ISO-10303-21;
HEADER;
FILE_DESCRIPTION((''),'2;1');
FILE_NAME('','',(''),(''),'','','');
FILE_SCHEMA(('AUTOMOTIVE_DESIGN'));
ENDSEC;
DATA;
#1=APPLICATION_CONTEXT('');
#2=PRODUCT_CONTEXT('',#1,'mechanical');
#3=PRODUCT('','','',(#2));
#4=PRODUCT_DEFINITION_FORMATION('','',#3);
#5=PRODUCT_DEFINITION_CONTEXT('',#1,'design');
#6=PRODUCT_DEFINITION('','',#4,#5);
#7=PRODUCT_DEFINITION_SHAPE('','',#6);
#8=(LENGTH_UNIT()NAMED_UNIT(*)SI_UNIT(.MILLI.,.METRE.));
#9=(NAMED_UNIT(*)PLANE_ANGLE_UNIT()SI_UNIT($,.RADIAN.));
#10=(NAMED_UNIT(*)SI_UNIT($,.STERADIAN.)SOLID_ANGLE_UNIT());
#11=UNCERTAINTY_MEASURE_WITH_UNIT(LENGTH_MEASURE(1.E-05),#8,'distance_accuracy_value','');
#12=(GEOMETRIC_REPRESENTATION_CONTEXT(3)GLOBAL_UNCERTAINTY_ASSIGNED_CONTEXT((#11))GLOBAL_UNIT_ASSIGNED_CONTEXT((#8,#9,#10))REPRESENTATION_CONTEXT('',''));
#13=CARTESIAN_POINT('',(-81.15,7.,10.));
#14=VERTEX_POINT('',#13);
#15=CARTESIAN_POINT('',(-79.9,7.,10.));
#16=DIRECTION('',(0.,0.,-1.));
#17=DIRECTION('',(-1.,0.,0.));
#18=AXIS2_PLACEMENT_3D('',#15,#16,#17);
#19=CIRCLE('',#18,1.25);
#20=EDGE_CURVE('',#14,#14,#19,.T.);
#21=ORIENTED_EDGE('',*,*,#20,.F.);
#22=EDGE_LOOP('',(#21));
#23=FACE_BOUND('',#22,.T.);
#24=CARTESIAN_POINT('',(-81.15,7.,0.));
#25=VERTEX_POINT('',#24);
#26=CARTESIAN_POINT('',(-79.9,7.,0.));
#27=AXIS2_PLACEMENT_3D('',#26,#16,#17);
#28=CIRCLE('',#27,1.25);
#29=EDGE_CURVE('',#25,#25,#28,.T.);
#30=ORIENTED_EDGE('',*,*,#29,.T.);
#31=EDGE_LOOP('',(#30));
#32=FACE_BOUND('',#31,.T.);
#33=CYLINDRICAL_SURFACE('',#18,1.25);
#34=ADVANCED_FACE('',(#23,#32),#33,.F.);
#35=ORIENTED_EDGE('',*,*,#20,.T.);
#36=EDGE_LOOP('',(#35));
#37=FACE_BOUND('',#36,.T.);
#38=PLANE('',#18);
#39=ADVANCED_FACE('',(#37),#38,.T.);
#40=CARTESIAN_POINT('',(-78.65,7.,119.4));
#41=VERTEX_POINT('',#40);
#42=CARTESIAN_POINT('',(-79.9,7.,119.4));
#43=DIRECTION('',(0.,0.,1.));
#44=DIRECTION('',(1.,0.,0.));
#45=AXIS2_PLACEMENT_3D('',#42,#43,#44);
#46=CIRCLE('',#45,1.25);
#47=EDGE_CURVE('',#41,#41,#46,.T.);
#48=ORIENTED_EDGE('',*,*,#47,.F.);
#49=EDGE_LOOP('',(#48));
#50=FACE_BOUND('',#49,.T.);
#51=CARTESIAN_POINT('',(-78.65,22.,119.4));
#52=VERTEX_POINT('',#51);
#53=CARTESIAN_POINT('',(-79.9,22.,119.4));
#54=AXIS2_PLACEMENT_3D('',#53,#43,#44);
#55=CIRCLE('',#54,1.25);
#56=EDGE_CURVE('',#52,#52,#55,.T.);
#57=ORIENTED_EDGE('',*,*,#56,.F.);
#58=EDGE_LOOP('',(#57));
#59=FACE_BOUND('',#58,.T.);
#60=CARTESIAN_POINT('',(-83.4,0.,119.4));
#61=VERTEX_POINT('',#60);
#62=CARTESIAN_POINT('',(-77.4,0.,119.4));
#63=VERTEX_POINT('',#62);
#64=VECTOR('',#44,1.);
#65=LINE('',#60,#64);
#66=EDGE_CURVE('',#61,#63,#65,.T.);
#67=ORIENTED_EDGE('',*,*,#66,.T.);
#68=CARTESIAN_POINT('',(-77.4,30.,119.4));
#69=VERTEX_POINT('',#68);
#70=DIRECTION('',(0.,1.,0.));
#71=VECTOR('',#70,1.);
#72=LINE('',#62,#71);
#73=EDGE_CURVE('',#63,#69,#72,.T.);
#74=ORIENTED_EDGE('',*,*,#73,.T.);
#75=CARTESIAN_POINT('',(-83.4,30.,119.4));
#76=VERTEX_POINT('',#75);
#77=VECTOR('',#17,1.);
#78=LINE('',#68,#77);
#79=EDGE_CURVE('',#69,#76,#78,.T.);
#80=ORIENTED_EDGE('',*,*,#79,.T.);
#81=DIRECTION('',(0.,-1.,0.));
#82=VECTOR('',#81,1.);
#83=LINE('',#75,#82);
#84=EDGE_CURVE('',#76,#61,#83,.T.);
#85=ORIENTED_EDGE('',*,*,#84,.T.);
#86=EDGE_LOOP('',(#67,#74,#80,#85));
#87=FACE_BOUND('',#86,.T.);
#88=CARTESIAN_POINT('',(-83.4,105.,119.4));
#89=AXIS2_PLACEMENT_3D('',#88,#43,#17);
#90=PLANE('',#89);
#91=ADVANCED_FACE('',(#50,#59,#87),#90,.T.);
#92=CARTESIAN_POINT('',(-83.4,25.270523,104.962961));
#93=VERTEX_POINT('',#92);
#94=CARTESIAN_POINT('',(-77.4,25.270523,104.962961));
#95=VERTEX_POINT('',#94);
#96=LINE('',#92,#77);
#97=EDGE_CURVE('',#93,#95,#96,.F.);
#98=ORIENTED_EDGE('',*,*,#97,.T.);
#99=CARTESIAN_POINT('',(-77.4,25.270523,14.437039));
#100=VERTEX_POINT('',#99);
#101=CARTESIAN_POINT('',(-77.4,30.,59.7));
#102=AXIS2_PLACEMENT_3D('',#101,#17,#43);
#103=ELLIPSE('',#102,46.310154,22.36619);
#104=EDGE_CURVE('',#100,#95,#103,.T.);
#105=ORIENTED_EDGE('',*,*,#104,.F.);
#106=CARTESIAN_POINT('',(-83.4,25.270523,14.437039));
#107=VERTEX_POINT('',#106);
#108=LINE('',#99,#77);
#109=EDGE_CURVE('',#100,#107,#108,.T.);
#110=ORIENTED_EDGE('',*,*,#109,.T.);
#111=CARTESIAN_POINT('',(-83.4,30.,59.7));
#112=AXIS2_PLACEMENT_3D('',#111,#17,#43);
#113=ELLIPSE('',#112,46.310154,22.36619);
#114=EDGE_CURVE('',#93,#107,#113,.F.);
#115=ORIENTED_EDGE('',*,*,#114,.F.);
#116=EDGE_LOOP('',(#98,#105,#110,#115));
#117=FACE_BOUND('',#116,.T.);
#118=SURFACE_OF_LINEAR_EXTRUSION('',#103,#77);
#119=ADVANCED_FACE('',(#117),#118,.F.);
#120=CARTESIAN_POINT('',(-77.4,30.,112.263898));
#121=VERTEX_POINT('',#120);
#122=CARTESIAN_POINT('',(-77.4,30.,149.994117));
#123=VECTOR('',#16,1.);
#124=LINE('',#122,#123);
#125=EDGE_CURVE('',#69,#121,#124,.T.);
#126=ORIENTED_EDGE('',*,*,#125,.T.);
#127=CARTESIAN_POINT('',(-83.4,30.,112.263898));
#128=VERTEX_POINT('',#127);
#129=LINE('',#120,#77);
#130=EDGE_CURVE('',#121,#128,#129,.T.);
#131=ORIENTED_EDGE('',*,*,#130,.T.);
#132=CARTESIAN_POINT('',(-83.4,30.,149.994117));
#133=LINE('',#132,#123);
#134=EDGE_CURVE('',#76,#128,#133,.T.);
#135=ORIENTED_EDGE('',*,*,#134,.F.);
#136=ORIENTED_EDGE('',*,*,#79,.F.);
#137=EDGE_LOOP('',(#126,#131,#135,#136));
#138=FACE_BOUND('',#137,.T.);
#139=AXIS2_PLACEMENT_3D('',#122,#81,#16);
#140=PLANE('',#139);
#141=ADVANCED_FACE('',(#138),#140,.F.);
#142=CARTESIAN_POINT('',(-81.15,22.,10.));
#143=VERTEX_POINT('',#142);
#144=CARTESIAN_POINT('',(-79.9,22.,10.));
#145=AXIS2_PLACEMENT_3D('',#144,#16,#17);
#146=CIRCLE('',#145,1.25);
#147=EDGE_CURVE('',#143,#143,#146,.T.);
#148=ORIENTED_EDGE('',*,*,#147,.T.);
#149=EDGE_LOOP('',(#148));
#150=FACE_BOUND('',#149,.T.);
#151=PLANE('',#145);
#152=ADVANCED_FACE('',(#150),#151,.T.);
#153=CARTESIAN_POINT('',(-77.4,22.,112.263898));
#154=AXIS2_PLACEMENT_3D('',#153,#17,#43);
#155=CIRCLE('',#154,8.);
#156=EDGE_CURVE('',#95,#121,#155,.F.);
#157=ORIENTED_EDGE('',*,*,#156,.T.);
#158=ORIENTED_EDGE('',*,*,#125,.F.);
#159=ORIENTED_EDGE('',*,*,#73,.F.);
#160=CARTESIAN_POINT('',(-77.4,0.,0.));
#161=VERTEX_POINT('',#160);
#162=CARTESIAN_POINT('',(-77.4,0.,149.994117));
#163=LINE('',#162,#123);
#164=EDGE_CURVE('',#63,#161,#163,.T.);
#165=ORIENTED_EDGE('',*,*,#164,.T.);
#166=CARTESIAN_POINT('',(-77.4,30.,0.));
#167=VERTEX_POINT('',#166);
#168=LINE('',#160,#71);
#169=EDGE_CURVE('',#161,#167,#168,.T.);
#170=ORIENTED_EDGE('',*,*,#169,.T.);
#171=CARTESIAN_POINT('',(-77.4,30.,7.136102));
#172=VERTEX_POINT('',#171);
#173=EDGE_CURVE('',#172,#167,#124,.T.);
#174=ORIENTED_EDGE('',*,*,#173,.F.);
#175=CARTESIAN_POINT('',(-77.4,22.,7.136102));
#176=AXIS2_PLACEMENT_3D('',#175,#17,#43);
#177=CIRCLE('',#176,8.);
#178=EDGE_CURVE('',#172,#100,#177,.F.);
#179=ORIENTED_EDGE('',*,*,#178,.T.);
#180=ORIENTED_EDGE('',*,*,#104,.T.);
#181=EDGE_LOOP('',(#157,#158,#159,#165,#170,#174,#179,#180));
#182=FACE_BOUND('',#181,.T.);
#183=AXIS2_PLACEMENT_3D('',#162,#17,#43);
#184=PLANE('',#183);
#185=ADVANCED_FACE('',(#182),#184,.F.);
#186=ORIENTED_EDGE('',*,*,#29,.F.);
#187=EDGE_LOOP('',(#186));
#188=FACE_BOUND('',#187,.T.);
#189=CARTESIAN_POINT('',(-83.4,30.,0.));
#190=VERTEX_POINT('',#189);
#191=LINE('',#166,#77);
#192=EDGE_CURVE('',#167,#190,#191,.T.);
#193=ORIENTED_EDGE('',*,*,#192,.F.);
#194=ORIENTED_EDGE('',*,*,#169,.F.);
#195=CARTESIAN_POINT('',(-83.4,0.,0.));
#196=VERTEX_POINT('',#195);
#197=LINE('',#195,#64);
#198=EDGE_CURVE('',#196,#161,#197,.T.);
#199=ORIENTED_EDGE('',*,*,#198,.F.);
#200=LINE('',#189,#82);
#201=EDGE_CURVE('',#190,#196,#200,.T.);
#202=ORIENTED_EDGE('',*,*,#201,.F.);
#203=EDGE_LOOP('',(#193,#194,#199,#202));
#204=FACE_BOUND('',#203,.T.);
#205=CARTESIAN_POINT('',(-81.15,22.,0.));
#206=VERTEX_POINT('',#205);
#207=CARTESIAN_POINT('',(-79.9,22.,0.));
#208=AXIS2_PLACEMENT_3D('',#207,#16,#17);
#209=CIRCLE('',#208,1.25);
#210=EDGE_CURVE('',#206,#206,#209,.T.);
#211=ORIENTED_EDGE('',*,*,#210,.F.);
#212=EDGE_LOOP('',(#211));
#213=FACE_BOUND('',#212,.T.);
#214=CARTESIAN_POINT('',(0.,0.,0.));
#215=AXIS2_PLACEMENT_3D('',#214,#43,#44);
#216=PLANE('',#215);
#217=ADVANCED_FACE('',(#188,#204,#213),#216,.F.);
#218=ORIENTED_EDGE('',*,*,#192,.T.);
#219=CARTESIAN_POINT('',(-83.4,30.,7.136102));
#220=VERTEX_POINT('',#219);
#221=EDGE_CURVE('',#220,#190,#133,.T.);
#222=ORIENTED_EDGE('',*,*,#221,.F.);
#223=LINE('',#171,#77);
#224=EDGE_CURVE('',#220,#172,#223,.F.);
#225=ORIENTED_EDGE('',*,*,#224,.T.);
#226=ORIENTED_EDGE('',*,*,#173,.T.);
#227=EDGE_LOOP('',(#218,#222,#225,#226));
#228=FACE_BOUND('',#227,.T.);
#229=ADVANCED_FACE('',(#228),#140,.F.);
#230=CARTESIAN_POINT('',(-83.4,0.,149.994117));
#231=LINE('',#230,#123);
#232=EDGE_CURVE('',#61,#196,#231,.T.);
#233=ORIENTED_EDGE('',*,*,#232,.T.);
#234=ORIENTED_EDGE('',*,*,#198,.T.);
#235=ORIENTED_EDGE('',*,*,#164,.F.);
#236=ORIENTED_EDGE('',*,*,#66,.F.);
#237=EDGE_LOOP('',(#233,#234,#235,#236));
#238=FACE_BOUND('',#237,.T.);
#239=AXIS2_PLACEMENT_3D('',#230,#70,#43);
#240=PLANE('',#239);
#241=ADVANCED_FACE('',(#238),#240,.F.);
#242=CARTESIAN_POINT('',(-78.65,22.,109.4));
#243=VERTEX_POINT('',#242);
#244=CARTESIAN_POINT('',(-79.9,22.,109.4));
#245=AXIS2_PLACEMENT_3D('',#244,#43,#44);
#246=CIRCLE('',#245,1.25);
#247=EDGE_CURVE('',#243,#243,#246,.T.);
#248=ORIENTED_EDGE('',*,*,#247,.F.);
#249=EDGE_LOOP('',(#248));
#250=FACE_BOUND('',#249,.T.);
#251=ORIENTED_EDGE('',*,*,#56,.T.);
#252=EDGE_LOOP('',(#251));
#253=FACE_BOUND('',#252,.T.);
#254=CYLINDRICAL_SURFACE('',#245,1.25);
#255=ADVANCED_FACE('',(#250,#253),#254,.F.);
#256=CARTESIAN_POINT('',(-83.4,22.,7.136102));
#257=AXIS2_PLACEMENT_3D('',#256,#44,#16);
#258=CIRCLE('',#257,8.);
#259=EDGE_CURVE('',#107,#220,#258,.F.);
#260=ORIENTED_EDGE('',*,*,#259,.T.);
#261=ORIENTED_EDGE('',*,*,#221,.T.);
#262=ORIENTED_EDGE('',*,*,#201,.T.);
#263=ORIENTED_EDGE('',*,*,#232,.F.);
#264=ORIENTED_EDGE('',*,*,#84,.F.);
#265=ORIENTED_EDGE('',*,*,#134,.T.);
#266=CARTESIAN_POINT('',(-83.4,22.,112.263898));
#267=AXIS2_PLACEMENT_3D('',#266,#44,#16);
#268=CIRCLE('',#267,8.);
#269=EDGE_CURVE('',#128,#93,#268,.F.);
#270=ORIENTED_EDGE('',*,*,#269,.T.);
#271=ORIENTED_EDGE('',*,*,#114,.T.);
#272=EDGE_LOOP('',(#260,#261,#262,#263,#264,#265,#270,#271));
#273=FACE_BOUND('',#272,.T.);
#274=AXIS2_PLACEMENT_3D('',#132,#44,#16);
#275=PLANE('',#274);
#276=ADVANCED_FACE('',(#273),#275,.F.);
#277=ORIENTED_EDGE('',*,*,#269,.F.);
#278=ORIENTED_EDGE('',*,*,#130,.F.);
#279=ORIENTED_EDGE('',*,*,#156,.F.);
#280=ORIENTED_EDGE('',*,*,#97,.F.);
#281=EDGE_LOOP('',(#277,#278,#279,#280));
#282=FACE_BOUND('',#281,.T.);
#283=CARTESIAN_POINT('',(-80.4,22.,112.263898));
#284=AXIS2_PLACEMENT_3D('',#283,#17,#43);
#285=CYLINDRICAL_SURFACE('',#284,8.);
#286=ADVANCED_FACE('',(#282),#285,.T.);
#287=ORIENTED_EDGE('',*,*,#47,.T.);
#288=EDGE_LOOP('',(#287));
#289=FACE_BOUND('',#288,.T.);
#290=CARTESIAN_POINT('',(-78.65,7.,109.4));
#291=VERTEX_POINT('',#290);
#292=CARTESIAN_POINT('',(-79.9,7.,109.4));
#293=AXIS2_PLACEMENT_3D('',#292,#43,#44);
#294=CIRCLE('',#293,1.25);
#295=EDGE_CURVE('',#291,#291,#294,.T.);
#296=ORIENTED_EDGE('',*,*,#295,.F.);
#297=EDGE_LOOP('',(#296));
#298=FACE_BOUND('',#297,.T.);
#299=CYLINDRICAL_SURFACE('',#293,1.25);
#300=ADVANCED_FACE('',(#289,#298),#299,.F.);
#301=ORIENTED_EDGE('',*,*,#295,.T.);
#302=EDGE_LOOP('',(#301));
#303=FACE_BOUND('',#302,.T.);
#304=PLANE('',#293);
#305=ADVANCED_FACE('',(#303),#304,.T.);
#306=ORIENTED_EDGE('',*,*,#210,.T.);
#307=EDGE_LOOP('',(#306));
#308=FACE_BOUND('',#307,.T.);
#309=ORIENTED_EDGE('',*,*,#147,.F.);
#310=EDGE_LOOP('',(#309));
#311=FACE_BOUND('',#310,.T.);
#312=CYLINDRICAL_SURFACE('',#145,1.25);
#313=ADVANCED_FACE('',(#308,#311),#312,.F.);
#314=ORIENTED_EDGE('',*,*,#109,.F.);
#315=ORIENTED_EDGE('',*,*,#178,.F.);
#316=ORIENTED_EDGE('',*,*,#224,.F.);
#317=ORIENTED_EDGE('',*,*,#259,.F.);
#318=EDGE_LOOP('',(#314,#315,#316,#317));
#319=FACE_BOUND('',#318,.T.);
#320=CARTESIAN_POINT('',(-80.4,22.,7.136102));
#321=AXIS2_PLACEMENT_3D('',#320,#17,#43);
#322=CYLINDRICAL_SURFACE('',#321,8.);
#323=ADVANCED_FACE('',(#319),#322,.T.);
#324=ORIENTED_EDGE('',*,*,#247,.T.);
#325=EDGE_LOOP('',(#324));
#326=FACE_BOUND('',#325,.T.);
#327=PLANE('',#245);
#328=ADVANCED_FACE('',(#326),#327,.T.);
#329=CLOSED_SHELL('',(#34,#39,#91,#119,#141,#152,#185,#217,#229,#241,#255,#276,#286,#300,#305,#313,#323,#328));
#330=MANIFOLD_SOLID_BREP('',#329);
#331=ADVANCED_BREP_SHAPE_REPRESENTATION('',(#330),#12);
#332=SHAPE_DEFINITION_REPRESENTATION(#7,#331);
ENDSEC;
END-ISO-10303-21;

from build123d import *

# Parameters (mm, degrees)
SKETCH_3_W          = 6
SKETCH_3_H          = 30
EXTRUDE_1_DEPTH     = 119.4
SKETCH_4_RX         = 46.310154036
SKETCH_4_RY         = 22.366189945
CUT_EXTRUDE_1_DEPTH = 124.257291874
FILLET_START        = -84
FILLET_1_DEPTH      = 8
SKETCH_5_R          = 1.25
CUT_EXTRUDE_2_DEPTH = 10
CUT_EXTRUDE_START   = -10
SKETCH_6_R          = 1.25
CUT_EXTRUDE_3_DEPTH = 10


with BuildPart() as part:
    # 草图3 → 凸台-拉伸1 (new body)
    with BuildSketch(Plane.XY):
        with Locations((-80.4, 15)):
            Rectangle(SKETCH_3_W, SKETCH_3_H)
    extrude(amount=EXTRUDE_1_DEPTH)

    # 草图4 → 切除-拉伸1 (cut, through all)
    with BuildSketch(Plane.ZY.offset(83.4)):
        with Locations((59.7, 30)):
            Ellipse(SKETCH_4_RX, SKETCH_4_RY)
    extrude(amount=-CUT_EXTRUDE_1_DEPTH, mode=Mode.SUBTRACT)

    # 圆角1: read off the stored shape, not the designer's step
    # 圆角1 outline → 圆角1 (cut)
    with BuildSketch(Plane.YZ.offset(FILLET_START)):
        with BuildLine():
            Line((30, 106.010154036), (30, 112.263898035))
            ThreePointArc((30, 112.263898035), (28.714319891, 107.914425838), (25.270522901, 104.962961112))
            add(Edge.make_bspline(
                [(25.270522901, 104.962961112), (27.608219262, 106.010154036), (30, 106.010154036)],
                knots=[6.05570643, 6.05570643, 6.05570643, 6.283185307, 6.283185307, 6.283185307], degree=2, weights=[0.927453028, 0.957583921, 1]))
        make_face()
        with BuildLine():
            add(Edge.make_bspline(
                [(30, 13.389845964), (27.608219262, 13.389845964), (25.270522901, 14.437038888)],
                knots=[3.141592654, 3.141592654, 3.141592654, 3.369071531, 3.369071531, 3.369071531], degree=2, weights=[1, 0.957583921, 0.927453028]))
            ThreePointArc((25.270522901, 14.437038888), (28.714319891, 11.485574162), (30, 7.136101965))
            Line((30, 7.136101965), (30, 13.389845964))
        make_face()
    extrude(amount=FILLET_1_DEPTH, mode=Mode.SUBTRACT)

    # 草图5 → 切除-拉伸2 (cut)
    with BuildSketch(Plane.XY.offset(119.4)):
        with Locations((-79.9, 22)):
            Circle(SKETCH_5_R)
        with Locations((-79.9, 7)):
            Circle(SKETCH_5_R)
    extrude(amount=-CUT_EXTRUDE_2_DEPTH, mode=Mode.SUBTRACT)

    # 草图6 → 切除-拉伸3 (cut)
    with BuildSketch(Plane(origin=(0, 0, 0), x_dir=(-1, 0, 0), z_dir=(0, 0, -1)).offset(CUT_EXTRUDE_START)):
        with Locations(Location((79.9, 22, 0), (0, 0, 180))):
            Circle(SKETCH_6_R)
        with Locations(Location((79.9, 7, 0), (0, 0, 180))):
            Circle(SKETCH_6_R)
    extrude(amount=CUT_EXTRUDE_3_DEPTH, mode=Mode.SUBTRACT)


solid = part.part
